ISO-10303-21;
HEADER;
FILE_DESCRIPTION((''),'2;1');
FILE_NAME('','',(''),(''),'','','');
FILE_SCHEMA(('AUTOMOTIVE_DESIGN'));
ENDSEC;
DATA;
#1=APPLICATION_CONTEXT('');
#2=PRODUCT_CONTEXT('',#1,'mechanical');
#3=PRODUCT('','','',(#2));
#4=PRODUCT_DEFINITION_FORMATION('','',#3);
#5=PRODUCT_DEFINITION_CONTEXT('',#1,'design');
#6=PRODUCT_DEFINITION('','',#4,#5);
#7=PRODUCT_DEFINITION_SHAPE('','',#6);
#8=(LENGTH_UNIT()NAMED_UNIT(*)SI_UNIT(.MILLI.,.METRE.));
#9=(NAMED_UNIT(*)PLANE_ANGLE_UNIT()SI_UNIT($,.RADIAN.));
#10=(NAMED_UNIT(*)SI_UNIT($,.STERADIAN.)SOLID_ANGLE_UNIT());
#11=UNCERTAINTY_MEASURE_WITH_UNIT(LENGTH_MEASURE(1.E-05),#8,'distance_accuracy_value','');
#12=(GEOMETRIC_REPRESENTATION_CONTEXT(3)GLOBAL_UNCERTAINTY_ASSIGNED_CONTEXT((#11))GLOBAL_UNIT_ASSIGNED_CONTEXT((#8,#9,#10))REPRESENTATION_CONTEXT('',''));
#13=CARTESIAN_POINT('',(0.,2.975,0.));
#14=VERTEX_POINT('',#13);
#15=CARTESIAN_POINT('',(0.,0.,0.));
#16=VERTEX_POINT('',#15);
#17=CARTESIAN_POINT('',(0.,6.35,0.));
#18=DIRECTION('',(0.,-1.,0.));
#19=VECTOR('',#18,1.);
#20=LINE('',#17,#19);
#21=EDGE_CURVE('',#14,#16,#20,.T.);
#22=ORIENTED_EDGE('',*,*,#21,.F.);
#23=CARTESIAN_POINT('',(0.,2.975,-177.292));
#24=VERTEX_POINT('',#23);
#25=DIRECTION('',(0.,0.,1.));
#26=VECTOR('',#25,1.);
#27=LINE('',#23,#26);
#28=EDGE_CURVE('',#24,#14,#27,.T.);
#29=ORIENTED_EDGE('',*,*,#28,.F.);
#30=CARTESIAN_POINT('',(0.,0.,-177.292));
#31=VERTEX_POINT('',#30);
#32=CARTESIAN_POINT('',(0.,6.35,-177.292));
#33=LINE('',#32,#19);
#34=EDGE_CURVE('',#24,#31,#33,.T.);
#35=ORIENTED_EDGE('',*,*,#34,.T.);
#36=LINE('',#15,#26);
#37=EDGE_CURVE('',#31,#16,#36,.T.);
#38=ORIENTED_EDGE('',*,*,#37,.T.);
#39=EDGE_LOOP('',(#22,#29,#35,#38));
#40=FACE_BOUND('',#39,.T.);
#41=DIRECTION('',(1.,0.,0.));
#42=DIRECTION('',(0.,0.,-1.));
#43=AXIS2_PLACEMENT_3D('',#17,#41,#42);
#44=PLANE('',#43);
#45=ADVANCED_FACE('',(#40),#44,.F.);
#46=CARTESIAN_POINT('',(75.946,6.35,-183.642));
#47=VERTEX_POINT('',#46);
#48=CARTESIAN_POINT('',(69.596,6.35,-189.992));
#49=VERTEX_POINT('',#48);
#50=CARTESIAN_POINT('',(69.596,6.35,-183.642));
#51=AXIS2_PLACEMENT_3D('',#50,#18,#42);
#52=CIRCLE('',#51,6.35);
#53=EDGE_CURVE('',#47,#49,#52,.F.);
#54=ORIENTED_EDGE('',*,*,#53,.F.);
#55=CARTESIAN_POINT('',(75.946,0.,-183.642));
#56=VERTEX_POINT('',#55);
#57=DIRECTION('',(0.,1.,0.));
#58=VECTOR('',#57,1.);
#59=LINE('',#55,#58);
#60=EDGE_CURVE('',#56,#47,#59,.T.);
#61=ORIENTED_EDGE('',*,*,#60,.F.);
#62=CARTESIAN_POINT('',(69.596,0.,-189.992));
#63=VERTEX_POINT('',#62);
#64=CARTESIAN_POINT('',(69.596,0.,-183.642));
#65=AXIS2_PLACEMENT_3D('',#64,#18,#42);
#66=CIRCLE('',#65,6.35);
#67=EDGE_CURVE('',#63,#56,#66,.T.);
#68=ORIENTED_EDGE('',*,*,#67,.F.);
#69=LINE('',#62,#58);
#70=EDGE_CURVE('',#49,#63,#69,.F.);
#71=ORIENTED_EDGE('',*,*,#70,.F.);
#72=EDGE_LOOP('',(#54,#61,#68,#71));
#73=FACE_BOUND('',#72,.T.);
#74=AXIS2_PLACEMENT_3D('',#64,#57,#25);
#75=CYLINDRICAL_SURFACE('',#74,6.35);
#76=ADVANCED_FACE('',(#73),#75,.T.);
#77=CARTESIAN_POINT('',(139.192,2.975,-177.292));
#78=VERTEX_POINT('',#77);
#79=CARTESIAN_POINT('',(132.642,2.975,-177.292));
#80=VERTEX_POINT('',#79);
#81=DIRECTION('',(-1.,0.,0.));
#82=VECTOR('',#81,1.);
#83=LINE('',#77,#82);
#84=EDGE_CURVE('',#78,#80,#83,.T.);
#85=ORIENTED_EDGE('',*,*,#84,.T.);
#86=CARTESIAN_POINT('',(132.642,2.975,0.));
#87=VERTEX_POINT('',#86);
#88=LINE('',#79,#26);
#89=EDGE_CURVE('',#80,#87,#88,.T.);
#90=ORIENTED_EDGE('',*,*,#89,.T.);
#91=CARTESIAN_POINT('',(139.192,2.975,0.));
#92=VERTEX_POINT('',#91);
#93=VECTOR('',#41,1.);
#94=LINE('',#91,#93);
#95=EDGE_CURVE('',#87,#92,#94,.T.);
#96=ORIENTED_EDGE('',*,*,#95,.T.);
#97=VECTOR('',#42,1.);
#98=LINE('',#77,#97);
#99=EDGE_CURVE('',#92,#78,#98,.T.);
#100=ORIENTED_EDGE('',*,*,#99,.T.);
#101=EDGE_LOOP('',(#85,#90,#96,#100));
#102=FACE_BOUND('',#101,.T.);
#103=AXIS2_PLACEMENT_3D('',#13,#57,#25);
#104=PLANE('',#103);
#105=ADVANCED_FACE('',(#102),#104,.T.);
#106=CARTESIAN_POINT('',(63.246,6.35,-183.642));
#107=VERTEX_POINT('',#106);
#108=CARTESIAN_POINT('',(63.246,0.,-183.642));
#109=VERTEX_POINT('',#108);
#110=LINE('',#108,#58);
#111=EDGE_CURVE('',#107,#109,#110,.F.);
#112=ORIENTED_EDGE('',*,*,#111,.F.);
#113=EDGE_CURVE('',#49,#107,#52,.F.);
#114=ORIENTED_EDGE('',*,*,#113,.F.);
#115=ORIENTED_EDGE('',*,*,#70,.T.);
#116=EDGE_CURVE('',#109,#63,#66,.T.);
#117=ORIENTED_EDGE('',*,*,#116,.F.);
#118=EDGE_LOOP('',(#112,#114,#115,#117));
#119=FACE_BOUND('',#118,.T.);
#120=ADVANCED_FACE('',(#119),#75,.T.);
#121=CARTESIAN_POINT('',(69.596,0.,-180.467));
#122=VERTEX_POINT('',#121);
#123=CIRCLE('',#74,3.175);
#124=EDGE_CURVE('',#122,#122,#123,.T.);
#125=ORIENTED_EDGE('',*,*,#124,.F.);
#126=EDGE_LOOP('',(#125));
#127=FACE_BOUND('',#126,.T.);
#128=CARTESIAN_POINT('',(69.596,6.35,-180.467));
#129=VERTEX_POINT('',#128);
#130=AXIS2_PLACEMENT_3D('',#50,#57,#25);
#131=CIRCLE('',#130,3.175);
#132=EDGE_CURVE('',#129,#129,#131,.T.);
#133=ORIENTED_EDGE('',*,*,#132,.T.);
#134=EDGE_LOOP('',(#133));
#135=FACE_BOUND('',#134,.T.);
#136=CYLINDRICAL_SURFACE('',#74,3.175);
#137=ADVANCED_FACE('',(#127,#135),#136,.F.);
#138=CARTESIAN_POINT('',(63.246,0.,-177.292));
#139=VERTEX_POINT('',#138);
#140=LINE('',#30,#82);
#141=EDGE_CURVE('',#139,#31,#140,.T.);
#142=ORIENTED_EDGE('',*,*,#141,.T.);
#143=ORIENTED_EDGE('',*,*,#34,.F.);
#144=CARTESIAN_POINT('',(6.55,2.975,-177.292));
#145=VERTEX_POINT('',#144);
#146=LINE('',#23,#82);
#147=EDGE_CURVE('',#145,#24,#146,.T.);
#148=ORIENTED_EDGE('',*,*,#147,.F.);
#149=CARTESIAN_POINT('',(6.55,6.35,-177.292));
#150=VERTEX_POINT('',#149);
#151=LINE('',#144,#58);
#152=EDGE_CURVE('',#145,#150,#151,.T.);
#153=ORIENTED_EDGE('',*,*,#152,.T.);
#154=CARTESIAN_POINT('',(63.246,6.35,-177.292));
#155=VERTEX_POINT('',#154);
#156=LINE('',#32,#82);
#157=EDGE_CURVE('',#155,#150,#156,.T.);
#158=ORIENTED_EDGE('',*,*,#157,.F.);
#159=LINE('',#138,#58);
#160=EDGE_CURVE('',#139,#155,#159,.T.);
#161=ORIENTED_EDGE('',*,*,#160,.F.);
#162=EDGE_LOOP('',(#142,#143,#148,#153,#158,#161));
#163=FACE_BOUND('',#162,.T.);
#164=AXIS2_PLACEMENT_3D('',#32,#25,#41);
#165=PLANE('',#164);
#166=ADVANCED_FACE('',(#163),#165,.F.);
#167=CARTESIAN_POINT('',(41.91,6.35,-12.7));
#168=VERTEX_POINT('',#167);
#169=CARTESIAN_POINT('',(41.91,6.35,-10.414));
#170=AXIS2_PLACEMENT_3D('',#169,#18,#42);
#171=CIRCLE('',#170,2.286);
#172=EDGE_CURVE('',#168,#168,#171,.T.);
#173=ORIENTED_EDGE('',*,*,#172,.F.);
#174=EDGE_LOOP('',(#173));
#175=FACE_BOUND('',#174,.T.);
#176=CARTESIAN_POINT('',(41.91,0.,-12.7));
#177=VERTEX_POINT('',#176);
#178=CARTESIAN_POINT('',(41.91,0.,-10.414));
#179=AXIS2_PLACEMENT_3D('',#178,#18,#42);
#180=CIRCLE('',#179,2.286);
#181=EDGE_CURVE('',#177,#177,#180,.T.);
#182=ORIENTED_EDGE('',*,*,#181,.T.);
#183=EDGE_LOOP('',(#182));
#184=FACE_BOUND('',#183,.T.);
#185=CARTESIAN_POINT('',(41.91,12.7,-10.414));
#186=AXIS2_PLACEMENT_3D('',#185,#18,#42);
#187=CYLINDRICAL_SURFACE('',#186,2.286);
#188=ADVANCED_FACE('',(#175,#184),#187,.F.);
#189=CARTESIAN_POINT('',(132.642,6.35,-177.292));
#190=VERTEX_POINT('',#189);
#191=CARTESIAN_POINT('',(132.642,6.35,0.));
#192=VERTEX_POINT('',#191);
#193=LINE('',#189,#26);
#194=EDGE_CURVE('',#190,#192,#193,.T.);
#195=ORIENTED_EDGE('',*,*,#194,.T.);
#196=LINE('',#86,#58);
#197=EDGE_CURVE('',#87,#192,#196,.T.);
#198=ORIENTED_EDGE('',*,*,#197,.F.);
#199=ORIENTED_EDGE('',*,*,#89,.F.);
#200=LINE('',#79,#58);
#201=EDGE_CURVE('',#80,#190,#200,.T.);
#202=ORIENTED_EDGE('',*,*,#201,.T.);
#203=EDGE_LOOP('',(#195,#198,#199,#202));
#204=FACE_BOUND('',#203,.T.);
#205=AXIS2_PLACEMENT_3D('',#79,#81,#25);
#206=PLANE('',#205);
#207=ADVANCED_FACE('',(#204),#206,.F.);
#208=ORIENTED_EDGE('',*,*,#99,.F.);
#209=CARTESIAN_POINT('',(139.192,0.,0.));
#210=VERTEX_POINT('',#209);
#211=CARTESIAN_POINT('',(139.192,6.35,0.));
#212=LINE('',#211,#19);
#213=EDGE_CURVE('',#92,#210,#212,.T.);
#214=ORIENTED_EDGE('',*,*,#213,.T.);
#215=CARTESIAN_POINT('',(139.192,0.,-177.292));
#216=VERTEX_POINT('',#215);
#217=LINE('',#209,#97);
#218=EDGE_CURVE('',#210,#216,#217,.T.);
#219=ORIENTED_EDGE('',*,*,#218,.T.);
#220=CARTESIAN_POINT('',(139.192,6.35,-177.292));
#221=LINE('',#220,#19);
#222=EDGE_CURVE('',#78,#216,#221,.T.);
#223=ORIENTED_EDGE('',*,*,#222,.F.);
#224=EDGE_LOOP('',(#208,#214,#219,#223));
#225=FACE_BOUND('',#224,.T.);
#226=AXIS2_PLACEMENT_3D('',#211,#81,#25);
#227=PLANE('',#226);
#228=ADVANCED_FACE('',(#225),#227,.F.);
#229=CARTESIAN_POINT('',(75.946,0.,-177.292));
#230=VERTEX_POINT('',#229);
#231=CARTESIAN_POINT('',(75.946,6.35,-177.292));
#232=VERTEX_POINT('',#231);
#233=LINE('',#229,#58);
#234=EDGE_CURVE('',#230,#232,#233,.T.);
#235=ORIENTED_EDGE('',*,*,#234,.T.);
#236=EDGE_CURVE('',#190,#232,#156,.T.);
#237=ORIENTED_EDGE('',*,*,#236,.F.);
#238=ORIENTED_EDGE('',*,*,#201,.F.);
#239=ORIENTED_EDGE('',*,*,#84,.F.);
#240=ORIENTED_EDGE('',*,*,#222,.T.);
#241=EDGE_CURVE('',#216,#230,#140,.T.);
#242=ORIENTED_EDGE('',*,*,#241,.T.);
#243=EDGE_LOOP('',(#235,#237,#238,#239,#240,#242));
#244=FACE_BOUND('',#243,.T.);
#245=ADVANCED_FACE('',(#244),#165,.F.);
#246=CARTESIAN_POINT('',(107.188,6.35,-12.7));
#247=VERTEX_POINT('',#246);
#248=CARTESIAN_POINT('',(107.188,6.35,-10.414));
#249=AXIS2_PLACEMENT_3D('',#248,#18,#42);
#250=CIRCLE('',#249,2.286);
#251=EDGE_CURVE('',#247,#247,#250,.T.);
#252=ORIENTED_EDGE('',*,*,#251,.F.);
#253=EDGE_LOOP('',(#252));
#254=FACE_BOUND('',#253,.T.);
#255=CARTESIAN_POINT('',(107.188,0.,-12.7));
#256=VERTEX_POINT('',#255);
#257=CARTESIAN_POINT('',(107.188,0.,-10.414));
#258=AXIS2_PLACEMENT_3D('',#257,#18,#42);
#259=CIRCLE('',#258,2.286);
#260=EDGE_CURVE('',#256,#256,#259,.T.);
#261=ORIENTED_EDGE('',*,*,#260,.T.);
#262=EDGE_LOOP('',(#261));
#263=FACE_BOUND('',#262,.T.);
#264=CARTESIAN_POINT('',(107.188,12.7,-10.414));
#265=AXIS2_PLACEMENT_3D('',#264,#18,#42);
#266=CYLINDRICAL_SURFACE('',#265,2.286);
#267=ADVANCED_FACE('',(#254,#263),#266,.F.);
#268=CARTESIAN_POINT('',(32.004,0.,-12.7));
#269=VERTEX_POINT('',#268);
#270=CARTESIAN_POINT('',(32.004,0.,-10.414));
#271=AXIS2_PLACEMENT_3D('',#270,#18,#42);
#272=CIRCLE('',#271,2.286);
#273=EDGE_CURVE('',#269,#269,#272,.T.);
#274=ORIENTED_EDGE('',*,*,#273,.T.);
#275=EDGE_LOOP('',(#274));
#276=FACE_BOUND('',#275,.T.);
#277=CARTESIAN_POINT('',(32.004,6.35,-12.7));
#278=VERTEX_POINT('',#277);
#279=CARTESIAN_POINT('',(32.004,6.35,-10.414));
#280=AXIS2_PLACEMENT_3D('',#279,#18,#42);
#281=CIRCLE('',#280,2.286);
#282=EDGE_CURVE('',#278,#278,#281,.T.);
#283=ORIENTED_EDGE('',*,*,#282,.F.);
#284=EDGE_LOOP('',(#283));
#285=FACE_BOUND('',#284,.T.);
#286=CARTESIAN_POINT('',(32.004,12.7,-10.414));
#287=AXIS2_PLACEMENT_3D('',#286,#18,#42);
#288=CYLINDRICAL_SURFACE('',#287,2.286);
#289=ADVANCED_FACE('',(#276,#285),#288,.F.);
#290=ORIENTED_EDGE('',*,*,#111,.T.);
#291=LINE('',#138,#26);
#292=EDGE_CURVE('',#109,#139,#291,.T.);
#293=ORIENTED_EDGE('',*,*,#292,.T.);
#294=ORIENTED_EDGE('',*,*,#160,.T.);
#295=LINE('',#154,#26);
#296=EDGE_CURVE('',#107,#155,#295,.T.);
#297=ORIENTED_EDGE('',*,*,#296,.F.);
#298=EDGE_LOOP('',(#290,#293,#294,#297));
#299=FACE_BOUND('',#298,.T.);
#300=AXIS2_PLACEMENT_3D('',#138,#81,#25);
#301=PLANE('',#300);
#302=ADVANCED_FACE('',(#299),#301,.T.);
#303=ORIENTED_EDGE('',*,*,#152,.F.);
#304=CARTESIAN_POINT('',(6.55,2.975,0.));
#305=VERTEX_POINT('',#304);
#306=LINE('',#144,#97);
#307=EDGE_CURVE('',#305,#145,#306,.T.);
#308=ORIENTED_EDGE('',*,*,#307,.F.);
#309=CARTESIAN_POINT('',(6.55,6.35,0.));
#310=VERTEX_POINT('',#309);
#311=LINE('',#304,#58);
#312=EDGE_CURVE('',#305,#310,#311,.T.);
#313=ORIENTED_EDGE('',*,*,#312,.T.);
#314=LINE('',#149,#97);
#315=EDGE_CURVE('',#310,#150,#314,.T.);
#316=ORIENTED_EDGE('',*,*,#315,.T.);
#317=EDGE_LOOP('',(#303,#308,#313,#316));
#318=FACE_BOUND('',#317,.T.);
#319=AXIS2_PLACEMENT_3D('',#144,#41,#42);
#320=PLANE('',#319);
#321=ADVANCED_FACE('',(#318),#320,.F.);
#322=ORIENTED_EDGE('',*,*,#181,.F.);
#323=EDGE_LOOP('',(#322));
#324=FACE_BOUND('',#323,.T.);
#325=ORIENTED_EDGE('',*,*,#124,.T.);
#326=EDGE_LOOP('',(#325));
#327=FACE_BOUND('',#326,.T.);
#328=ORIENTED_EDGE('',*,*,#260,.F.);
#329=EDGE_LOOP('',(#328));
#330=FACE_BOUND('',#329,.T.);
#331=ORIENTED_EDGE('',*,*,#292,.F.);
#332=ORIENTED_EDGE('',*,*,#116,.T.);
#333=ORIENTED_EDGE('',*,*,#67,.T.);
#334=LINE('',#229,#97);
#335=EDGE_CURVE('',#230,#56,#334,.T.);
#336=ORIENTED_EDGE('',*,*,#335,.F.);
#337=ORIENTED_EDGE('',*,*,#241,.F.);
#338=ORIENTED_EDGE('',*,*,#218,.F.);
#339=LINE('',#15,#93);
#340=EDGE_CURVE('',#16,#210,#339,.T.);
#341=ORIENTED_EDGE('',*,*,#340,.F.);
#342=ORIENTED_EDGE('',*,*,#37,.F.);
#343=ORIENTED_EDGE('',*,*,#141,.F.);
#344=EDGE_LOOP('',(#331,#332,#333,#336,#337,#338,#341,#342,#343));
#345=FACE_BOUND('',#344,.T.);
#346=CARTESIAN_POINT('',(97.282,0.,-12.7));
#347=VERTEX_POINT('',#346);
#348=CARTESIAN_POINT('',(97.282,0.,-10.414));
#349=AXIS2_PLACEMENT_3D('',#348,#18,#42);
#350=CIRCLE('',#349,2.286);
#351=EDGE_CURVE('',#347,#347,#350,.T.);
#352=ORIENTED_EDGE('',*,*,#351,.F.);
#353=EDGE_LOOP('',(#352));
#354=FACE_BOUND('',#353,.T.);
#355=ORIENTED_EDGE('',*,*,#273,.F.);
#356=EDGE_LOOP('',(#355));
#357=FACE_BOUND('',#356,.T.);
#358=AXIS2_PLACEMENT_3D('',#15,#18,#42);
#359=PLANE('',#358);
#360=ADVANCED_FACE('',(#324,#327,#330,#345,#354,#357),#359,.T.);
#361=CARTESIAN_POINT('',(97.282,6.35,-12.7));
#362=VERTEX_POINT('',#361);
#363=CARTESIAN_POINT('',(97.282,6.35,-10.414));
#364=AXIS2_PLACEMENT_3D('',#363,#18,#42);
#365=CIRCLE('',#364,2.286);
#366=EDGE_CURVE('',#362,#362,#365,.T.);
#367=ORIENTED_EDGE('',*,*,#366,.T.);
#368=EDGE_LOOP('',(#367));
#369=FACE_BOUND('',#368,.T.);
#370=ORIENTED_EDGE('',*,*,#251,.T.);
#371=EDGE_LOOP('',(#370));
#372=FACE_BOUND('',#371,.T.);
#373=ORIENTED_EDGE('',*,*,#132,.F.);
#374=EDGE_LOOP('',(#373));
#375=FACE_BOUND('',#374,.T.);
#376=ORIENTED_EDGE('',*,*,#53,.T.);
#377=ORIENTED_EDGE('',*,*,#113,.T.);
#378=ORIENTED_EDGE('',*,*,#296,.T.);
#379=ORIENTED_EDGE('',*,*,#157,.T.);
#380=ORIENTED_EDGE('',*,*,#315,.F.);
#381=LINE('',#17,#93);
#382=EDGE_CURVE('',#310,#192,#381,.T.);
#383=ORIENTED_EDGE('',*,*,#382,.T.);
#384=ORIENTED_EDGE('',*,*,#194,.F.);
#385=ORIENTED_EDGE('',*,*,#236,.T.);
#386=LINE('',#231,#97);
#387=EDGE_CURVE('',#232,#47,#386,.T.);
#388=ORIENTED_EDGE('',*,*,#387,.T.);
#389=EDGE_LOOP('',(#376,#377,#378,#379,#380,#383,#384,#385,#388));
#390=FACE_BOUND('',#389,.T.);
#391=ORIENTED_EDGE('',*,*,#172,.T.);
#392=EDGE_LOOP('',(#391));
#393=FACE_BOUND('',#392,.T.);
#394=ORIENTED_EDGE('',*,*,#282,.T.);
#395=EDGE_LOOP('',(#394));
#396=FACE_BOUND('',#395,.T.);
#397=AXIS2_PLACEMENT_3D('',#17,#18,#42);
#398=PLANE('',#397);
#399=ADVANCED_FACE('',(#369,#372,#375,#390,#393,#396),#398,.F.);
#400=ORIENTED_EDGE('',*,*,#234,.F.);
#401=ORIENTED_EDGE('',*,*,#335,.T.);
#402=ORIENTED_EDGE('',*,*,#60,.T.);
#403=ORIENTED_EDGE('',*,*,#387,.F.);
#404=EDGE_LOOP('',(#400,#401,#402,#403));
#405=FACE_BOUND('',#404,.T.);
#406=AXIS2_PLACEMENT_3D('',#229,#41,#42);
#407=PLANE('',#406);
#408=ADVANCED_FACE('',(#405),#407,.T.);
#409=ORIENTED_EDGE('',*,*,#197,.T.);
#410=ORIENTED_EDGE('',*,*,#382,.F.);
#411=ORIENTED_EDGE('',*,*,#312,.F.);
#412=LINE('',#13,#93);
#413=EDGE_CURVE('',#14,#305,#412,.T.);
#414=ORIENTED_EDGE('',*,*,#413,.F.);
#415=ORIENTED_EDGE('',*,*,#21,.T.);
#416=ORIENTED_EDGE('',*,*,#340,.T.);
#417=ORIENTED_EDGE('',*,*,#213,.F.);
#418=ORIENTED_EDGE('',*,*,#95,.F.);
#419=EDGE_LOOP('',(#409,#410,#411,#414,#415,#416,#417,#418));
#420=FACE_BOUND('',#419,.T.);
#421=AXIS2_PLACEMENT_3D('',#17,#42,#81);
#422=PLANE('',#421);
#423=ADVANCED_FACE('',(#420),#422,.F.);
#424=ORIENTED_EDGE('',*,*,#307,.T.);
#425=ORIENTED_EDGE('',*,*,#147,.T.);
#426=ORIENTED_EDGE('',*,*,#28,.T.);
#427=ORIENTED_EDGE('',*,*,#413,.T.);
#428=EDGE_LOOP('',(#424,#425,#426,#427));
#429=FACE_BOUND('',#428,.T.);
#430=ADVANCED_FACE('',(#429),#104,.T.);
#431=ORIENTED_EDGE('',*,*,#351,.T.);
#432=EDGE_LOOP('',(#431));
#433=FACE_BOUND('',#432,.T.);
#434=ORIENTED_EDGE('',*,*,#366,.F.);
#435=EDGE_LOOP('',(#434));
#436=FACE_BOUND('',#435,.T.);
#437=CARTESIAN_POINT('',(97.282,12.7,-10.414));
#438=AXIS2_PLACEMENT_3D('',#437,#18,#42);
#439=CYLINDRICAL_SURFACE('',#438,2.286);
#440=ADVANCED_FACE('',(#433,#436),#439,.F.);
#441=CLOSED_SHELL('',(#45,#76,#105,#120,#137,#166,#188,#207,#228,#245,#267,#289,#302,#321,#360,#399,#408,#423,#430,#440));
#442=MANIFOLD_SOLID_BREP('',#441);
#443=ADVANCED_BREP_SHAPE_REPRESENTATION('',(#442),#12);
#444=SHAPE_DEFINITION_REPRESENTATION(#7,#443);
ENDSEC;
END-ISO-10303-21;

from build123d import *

# Parameters (mm, degrees)
SKETCH1_W           = 139.192
SKETCH1_H           = 177.292
BOSS_EXTRUDE1_DEPTH = 6.35
SKETCH2_W           = 6.55
SKETCH2_H           = 177.292
CUT_EXTRUDE1_DEPTH  = 3.375
SKETCH3_W           = 12.7
SKETCH3_H           = 12.7
BOSS_EXTRUDE2_DEPTH = 6.35
FILLET1_R           = 6.35
SKETCH4_R           = 3.175
CUT_EXTRUDE2_DEPTH  = 236.609200644
SKETCH5_R           = 2.286
CUT_EXTRUDE3_DEPTH  = 12.7


with BuildPart() as part:
    # Sketch1 → Boss-Extrude1 (new body)
    with BuildSketch(Plane(origin=(0, 0, 0), x_dir=(1, 0, 0), z_dir=(0, 1, 0))):
        with Locations((69.596, 88.646)):
            Rectangle(SKETCH1_W, SKETCH1_H)
    extrude(amount=BOSS_EXTRUDE1_DEPTH)

    # Sketch2 → Cut-Extrude1 (cut)
    with BuildSketch(Plane(origin=(0, 6.35, 0), x_dir=(1, 0, 0), z_dir=(0, 1, 0))):
        with Locations((135.917, 88.646)):
            Rectangle(SKETCH2_W, SKETCH2_H)
        with Locations((3.275, 88.646)):
            Rectangle(SKETCH2_W, SKETCH2_H)
    extrude(amount=-CUT_EXTRUDE1_DEPTH, mode=Mode.SUBTRACT)

    # Sketch3 → Boss-Extrude2 (add)
    with BuildSketch(Plane(origin=(0, 6.35, 0), x_dir=(1, 0, 0), z_dir=(0, 1, 0))):
        with Locations((69.596, 183.642)):
            Rectangle(SKETCH3_W, SKETCH3_H)
    extrude(amount=-BOSS_EXTRUDE2_DEPTH)

    # Fillet1
    fillet1_edges = [part.edges().sort_by_distance(p)[0] for p in [
        (63.246, 3.175, -189.992),
        (75.946, 3.175, -189.992),
    ]]
    fillet(fillet1_edges, radius=FILLET1_R - 0.0001)  # a hair under: the kernel refuses the full size

    # Sketch4 → Cut-Extrude2 (cut, through all)
    with BuildSketch(Plane(origin=(0, 6.35, 0), x_dir=(1, 0, 0), z_dir=(0, 1, 0))):
        with Locations(Location((69.596, 183.642, 0), (0, 0, 270))):
            Circle(SKETCH4_R)
    extrude(amount=-CUT_EXTRUDE2_DEPTH, mode=Mode.SUBTRACT)

    # Sketch5 → Cut-Extrude3 (cut)
    with BuildSketch(Plane.XZ):
        with Locations(Location((107.188, -10.414, 0), (0, 0, 270))):
            Circle(SKETCH5_R)
        with Locations(Location((97.282, -10.414, 0), (0, 0, 270))):
            Circle(SKETCH5_R)
        with Locations(Location((41.91, -10.414, 0), (0, 0, 270))):
            Circle(SKETCH5_R)
        with Locations(Location((32.004, -10.414, 0), (0, 0, 270))):
            Circle(SKETCH5_R)
    extrude(amount=-CUT_EXTRUDE3_DEPTH, mode=Mode.SUBTRACT)


solid = part.part
